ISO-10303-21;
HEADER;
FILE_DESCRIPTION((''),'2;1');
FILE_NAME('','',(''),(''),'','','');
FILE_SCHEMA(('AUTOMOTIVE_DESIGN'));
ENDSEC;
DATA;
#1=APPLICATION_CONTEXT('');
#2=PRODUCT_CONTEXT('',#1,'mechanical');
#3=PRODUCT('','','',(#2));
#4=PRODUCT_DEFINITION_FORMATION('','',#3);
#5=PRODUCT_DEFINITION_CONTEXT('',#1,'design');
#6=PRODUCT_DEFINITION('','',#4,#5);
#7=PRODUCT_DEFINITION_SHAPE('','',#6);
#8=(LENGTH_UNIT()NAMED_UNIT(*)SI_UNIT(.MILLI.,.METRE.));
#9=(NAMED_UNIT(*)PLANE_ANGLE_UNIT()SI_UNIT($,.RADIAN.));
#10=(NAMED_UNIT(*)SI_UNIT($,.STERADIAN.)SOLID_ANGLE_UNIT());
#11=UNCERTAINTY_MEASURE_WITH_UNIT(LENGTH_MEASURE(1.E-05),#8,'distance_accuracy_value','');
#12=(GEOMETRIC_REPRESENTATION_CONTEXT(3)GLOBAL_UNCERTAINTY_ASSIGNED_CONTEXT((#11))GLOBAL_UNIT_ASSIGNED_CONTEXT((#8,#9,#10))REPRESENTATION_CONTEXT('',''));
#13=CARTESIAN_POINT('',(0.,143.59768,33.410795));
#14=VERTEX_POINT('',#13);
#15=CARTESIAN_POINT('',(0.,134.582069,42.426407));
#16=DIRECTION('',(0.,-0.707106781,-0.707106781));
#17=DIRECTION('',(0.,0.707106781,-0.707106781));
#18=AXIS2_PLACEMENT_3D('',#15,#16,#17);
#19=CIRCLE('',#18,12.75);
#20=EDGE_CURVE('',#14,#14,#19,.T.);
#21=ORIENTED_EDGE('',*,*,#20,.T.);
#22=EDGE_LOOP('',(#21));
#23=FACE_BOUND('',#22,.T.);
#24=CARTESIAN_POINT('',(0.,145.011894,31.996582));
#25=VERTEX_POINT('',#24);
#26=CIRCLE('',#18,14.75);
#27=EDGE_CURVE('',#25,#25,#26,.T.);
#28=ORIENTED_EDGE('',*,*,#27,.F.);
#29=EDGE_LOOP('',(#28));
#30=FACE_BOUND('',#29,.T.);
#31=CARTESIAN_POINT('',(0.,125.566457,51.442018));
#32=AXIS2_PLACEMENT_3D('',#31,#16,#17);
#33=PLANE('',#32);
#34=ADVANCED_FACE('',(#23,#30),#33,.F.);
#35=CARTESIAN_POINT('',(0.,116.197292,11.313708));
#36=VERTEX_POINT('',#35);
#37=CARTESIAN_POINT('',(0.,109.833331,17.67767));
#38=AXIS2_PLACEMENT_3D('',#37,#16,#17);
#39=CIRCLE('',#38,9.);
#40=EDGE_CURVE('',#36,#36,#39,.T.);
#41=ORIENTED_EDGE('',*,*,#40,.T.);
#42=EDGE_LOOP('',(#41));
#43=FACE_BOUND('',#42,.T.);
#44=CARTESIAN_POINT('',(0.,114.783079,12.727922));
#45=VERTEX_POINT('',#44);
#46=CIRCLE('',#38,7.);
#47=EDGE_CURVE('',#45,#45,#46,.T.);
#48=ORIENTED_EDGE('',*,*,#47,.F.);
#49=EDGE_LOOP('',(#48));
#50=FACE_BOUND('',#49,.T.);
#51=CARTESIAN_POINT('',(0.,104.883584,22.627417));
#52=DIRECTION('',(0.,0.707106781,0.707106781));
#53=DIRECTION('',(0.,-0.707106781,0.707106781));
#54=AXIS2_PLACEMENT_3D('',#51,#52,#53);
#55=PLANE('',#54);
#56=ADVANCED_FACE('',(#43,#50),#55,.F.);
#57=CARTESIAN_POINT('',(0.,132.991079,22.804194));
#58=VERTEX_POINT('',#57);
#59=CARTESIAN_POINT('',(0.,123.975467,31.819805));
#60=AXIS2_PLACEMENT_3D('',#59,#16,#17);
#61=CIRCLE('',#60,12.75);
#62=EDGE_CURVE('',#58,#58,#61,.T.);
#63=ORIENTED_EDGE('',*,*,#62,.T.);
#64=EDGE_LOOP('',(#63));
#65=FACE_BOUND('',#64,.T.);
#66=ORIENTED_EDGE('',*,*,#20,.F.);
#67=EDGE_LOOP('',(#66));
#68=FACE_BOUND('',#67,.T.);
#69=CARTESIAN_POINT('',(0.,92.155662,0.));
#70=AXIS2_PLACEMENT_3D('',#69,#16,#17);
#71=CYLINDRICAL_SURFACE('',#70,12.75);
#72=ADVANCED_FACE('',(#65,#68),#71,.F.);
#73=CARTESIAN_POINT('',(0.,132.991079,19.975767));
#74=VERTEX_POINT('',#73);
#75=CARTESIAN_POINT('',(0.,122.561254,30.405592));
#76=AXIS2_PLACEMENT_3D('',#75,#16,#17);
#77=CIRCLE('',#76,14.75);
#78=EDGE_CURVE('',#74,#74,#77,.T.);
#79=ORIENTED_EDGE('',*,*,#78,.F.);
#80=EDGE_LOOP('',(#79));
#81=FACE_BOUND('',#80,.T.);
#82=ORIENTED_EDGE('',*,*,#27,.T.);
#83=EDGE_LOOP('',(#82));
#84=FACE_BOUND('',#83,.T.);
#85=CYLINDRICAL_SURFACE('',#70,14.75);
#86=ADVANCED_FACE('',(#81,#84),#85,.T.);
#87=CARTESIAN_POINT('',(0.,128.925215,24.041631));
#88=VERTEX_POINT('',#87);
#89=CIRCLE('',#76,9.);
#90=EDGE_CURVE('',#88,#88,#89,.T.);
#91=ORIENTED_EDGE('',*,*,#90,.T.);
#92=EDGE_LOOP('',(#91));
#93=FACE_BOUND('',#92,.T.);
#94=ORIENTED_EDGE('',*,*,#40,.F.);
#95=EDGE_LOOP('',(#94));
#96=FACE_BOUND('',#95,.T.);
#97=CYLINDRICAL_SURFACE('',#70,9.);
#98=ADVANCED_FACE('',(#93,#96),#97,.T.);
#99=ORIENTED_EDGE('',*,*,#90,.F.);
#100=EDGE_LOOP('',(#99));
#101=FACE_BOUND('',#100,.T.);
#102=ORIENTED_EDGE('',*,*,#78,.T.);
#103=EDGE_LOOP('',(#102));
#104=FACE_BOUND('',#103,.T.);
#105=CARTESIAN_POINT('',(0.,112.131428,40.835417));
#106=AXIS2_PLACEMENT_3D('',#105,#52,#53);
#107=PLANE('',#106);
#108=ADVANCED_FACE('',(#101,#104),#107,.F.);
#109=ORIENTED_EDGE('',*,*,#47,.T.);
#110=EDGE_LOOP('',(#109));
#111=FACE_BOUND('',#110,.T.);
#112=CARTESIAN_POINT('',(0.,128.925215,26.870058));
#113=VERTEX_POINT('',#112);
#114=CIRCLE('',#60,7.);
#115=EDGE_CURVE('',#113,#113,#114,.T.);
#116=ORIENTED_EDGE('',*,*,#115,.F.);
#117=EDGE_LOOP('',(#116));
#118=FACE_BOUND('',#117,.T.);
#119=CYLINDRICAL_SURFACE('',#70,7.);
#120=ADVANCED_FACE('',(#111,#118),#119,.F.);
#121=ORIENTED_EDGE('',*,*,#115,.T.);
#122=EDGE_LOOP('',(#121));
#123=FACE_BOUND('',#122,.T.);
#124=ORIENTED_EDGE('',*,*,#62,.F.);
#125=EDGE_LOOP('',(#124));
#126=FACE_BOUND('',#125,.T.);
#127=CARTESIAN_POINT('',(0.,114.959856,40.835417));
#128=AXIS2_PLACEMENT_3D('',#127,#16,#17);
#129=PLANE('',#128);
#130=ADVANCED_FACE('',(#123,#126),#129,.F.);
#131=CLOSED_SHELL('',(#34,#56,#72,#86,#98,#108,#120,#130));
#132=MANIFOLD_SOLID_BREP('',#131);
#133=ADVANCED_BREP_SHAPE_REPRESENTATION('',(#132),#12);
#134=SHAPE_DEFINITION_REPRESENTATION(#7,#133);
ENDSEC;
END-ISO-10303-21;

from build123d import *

# Parameters (mm, degrees)
CIRPATTERN1_COUNT = 2
CIRPATTERN1_ANGLE = 90


with BuildPart() as part:
    # Sketch1 → Revolve1 (revolve)
    with BuildSketch(Plane(origin=(0, 0, 0), x_dir=(0, 0, -1), z_dir=(1, 0, 0))):
        Polygon((-51.442018331, 125.566457335), (-40.835416614, 114.959855617), (-36.769552622, 119.025719609), (-22.627416998, 104.883583986), (-24.04163056, 103.469370423), (-36.769552622, 116.197292485), (-40.835416614, 112.131428493), (-52.856231894, 124.152243773), align=None)
    revolve1 = revolve(axis=Axis((0, 92.155661924, 0), (0, 0.7071067811865461, 0.707106781186549)))

    # CirPattern1: Revolve1 ×2 about axis
    cirpattern1_axis = Axis((0, 46.077830962, -46.077830962), (0, 0.707106781, 0.707106781))
    for i in range(1, CIRPATTERN1_COUNT):
        add(revolve1.rotate(cirpattern1_axis, i * CIRPATTERN1_ANGLE / (CIRPATTERN1_COUNT - 1)))


solid = part.part
